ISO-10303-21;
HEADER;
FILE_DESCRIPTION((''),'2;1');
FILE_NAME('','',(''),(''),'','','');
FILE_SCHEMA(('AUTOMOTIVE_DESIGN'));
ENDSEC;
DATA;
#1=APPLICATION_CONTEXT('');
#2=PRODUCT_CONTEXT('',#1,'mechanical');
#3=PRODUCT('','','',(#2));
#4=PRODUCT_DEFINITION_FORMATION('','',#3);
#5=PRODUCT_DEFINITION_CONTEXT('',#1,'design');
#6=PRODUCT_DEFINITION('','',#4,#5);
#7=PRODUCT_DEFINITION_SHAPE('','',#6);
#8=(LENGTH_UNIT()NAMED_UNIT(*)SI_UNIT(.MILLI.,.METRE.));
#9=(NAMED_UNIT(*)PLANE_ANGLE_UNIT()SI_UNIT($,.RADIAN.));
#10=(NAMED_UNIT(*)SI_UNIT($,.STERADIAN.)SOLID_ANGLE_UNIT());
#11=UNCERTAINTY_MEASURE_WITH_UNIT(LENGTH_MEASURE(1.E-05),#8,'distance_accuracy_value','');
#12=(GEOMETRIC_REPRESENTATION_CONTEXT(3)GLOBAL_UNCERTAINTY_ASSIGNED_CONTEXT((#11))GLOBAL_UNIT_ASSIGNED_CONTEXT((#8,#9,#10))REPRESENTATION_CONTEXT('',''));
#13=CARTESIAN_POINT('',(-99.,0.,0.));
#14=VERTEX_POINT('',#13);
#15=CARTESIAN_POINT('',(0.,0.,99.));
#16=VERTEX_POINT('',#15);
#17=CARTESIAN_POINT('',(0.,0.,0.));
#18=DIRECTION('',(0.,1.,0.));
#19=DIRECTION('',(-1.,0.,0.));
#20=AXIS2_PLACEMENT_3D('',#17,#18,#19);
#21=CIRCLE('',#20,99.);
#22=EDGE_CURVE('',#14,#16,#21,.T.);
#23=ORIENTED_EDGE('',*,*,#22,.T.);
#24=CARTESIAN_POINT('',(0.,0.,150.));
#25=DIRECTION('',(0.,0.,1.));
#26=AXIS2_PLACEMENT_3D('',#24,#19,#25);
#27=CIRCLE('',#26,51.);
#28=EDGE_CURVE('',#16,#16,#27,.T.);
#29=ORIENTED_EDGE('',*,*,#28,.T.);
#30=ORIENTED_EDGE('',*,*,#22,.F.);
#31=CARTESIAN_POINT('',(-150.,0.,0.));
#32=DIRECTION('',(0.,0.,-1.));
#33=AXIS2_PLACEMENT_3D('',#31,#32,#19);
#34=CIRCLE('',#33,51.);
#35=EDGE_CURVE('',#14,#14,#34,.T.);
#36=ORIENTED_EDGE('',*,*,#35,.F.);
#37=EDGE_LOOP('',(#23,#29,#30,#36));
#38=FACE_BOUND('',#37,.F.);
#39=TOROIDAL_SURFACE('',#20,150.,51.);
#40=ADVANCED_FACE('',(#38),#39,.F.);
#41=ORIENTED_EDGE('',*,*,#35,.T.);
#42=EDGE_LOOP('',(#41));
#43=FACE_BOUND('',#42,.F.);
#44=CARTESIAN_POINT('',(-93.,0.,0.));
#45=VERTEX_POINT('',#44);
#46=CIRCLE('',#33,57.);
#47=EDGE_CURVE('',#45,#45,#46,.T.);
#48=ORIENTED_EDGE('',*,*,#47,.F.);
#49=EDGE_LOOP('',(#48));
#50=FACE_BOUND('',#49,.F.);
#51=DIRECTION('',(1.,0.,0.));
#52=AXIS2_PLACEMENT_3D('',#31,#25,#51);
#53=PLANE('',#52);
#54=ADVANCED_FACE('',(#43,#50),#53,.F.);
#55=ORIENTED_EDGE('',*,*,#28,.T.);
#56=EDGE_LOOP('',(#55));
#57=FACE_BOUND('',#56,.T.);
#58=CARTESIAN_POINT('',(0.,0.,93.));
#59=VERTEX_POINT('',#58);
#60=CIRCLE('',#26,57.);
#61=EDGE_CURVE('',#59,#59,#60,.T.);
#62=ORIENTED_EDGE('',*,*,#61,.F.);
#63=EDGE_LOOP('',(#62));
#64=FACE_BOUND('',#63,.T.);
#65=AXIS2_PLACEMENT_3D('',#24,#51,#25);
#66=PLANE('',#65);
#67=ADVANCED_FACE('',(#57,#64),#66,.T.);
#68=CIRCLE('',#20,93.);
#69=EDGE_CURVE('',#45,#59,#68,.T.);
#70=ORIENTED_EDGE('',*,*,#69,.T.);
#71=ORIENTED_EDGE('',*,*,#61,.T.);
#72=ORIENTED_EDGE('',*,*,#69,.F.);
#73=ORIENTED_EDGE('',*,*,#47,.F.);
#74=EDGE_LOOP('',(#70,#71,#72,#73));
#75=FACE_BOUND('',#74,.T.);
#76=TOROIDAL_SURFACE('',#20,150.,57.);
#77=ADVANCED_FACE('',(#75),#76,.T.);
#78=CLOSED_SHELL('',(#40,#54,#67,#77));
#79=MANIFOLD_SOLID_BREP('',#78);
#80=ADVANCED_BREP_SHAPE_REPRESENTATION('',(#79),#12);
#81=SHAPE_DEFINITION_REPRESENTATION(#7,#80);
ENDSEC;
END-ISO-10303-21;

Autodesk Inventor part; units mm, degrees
ref_plane "YZ Plane" through (0, 0, 0) normal (1, 0, 0) x (0, 1, 0)
ref_plane "XZ Plane" through (0, 0, 0) normal (0, 1, 0) x (-1, 0, 0)
ref_plane "XY Plane" through (0, 0, 0) normal (0, 0, 1) x (1, 0, 0)
sketch "Sketch1" plane through (0, 0, 0) normal (0, 0, 1) x (1, 0, 0)
  line L0 (0, 0) -> (-150, 0)
  circle A0 centre (-150, 0) radius 51
  circle A1 centre (-150, 0) radius 57
  dimension "d2" = 114
  dimension "d3" = 6
  dimension "d4" = 150
sketch "Sketch2" plane through (0, 0, 0) normal (0, 1, 0) x (-1, 0, 0)
  arc A0 (150, 0) -> (0, 150) centre (0, 0) ccw
  line L0 (0, 0) -> (150, 0) construction
  line L1 (0, 0) -> (0, 150) construction
  dimension "d5" = 300
  dimension "d7" = 90
sweep "Sweep1" add profiles "Sketch1" path "Sketch2"
equation "\"d2\" = Dh"
equation "\"d3\" = S_"
equation "\"d4\" = R"
equation "\"d5\" = 2 * R"
equation "\"d7\" = Angle"
equation "\"Dh\" = 114"
equation "\"S_\" = 6"
equation "\"R\" = 150"
equation "\"Angle\" = 90deg"
properties part number "Elbow 90° 114x6 GOST 17375-83" material "Steel, Mild"
